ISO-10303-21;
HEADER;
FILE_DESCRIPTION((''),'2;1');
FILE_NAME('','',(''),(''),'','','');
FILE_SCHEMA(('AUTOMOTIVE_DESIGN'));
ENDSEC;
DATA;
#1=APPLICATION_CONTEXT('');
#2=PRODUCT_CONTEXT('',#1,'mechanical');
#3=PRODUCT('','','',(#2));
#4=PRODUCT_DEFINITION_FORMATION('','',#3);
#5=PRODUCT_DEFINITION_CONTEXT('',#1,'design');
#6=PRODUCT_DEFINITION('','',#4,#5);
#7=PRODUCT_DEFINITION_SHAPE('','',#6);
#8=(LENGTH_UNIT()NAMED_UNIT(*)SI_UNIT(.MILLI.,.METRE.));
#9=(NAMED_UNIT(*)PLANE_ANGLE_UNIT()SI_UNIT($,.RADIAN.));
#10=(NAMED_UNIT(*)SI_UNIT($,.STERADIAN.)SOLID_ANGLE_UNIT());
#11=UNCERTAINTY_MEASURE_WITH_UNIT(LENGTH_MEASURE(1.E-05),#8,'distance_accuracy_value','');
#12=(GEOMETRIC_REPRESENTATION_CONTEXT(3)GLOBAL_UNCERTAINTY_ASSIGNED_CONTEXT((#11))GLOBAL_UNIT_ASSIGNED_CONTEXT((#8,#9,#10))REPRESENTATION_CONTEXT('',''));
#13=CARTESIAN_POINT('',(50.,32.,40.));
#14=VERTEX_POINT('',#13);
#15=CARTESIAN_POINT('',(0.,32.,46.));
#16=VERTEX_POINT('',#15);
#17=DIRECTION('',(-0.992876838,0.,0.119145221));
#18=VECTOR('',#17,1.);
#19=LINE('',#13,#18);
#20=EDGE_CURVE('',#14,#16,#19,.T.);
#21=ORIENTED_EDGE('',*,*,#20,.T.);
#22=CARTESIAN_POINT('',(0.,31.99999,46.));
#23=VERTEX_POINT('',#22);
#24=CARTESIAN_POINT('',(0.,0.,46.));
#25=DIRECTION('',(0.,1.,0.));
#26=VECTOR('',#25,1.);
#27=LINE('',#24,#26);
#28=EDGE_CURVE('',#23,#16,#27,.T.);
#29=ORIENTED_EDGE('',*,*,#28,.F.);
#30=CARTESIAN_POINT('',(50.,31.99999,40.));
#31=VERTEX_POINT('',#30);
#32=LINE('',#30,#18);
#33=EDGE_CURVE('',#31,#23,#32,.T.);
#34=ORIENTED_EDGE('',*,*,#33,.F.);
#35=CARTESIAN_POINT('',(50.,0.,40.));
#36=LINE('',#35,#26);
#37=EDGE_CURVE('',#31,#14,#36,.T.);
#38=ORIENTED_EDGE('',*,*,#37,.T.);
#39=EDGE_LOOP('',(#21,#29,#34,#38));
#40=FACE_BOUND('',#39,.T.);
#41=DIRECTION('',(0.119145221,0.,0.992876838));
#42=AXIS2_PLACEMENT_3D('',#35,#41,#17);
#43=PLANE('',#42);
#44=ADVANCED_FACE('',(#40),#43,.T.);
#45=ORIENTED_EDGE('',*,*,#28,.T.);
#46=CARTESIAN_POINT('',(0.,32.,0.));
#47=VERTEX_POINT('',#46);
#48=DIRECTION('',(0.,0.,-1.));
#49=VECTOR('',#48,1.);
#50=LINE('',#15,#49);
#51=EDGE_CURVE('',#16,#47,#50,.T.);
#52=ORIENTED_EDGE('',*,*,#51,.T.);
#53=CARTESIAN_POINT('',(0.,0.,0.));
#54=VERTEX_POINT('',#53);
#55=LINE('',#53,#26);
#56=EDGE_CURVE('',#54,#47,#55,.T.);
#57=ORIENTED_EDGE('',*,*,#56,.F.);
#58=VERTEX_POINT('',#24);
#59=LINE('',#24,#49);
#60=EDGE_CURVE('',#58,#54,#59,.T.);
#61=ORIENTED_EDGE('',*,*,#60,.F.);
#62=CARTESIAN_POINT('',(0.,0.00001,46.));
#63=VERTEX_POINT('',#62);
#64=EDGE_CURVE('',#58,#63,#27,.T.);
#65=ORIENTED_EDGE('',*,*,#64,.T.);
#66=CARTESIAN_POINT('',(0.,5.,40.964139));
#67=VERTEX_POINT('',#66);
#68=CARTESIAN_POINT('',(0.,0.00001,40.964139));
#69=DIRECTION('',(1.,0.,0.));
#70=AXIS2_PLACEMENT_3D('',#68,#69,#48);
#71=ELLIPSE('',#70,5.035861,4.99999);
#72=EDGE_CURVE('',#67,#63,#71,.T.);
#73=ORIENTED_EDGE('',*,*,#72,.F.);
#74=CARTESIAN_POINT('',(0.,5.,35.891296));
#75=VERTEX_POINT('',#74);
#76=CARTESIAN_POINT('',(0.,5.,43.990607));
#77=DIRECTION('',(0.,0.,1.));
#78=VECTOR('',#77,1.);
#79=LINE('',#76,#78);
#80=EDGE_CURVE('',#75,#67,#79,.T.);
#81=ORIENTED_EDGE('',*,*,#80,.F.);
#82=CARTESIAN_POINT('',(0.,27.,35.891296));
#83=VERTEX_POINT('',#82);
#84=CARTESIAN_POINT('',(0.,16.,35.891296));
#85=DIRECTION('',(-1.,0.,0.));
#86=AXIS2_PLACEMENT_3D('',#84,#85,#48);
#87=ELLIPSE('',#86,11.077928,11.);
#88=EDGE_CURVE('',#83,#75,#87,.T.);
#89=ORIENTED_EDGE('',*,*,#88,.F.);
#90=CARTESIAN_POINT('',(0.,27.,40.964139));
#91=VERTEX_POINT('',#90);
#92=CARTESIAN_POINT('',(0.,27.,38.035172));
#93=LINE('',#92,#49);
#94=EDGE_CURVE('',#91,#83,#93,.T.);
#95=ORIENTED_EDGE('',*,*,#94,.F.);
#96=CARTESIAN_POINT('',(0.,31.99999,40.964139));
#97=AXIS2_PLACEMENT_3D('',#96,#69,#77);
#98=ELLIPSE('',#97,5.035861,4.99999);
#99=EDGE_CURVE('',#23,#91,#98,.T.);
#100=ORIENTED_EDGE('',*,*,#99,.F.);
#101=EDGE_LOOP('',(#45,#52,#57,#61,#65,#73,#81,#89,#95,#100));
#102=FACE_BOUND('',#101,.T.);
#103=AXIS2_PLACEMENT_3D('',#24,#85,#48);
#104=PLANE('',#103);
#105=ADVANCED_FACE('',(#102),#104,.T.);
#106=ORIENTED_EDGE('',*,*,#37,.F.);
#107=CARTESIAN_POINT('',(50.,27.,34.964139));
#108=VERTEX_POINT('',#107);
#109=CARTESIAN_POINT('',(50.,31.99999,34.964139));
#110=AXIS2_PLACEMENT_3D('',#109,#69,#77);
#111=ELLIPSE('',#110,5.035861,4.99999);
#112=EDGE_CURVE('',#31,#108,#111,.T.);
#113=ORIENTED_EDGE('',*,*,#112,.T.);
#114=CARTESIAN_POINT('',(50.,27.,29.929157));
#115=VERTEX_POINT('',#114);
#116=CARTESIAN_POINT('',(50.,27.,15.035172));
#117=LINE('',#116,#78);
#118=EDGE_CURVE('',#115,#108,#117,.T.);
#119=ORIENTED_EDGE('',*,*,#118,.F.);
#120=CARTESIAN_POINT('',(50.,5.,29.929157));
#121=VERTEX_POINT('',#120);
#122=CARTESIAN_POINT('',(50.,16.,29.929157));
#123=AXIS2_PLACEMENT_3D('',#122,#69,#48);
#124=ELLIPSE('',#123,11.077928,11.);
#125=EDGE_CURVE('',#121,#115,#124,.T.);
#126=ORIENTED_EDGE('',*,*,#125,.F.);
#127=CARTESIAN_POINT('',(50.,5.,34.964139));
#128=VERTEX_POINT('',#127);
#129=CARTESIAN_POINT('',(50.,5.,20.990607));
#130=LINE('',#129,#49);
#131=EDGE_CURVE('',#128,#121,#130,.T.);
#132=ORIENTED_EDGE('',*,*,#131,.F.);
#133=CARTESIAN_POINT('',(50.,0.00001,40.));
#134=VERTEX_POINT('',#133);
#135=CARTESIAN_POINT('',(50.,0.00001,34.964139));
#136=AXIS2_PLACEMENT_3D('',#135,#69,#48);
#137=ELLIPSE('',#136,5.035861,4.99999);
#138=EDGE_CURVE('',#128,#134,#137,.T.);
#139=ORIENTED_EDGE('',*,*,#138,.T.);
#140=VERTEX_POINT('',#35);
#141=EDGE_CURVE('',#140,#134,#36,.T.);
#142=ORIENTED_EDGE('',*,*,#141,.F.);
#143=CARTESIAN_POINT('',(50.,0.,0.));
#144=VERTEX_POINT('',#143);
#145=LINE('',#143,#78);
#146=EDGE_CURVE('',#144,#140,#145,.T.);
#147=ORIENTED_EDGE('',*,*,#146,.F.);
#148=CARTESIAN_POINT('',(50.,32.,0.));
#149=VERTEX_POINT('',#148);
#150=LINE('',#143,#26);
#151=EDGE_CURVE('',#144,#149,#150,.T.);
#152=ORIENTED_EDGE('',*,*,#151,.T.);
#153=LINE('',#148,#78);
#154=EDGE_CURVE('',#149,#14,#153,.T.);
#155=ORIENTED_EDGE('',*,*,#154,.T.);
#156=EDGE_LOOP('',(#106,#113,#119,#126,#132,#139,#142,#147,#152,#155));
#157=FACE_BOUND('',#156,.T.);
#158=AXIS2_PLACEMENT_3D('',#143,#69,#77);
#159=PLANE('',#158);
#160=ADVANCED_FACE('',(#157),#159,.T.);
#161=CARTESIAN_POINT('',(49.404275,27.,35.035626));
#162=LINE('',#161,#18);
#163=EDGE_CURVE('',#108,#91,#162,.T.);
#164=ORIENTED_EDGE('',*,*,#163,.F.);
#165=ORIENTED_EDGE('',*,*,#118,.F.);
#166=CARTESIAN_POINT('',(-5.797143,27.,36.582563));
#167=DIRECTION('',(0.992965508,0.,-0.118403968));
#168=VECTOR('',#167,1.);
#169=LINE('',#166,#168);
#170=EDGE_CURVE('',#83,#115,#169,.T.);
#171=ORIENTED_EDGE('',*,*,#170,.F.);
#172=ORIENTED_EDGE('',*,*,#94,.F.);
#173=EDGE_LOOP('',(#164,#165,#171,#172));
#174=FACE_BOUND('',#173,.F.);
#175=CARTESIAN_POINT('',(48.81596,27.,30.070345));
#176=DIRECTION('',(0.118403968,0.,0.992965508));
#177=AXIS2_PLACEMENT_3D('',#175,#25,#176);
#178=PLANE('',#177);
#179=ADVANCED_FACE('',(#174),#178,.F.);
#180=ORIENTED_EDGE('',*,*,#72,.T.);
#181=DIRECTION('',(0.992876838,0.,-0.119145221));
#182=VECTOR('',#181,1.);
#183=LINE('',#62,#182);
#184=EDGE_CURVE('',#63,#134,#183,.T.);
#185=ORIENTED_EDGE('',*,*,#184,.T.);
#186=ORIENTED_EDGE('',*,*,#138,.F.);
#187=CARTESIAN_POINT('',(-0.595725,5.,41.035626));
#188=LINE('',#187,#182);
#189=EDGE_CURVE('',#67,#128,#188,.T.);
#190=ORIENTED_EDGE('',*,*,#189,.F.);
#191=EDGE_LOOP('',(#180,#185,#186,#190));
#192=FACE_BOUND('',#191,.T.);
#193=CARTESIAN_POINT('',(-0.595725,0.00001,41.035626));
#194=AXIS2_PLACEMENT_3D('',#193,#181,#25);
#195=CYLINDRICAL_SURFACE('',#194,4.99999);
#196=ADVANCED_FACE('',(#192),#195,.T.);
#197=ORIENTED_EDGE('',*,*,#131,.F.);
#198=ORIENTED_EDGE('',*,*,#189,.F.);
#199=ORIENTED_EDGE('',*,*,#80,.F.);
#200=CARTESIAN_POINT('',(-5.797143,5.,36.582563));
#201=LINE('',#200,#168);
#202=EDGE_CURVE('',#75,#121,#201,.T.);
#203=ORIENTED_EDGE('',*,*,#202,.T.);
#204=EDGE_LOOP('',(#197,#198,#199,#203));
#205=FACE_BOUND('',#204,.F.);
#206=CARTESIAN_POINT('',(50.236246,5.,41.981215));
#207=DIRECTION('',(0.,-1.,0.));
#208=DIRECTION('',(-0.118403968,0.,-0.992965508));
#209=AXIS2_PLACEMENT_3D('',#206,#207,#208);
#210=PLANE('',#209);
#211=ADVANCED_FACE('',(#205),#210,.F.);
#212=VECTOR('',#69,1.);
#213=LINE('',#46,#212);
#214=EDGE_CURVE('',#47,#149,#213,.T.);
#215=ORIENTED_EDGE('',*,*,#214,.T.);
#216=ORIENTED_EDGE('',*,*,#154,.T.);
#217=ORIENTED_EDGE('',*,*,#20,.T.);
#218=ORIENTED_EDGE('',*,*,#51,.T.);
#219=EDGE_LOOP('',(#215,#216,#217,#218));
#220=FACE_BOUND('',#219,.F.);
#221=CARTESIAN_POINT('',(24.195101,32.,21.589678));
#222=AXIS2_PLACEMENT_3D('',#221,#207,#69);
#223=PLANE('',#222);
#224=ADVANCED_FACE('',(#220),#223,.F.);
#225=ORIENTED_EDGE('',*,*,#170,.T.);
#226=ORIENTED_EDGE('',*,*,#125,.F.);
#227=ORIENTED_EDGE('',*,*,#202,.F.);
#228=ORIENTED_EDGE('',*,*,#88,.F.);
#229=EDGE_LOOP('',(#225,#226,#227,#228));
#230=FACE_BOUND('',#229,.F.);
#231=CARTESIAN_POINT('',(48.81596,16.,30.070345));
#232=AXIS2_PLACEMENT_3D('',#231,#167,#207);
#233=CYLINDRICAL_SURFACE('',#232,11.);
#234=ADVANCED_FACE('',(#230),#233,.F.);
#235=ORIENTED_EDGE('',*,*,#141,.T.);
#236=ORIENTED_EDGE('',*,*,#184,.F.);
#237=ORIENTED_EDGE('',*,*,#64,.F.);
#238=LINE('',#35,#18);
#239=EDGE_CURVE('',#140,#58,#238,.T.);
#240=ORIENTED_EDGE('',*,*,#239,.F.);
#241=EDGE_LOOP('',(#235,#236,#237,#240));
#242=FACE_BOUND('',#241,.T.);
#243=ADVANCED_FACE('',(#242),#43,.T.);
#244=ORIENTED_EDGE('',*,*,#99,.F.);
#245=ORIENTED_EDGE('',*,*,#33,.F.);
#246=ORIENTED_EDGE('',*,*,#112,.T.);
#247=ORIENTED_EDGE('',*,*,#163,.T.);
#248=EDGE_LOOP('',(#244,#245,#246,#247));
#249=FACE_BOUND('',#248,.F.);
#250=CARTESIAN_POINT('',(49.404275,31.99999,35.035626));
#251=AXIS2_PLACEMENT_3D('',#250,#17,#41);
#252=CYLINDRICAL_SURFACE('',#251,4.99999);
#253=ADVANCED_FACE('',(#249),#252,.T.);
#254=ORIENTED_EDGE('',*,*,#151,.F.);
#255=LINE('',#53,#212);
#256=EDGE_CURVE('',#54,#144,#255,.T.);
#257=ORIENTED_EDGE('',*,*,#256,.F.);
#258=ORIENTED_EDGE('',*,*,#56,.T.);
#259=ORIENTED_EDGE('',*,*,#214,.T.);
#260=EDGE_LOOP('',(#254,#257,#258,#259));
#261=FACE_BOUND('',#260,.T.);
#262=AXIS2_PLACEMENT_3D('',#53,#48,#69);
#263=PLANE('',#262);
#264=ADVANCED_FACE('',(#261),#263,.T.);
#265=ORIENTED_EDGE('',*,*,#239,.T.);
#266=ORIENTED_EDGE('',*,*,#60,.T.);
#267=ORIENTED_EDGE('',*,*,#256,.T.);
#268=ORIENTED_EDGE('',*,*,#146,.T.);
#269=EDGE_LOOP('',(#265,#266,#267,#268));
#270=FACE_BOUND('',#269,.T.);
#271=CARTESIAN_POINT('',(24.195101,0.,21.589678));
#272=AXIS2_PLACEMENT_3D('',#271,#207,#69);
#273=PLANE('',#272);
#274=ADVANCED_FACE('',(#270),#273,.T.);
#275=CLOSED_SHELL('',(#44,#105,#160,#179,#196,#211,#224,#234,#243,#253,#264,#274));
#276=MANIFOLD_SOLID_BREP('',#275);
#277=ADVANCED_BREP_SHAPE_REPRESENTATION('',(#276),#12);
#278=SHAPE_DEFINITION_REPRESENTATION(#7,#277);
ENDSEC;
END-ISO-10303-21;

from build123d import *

# Parameters (mm, degrees)
F1_DEPTH = 32
F4_DEPTH = 55
F5_R     = 4.99999


# Not quite as in the source:
# - a fillet or chamfer is up to 0.001 mm smaller than in the source, because OpenCascade refuses the exact size


with BuildPart() as f1:
    # F0 (on Front) → F1 (new body)
    with BuildSketch(Plane.XZ):
        Polygon((0, 46), (0, 0), (50, 0), (50, 40), align=None)
    extrude(amount=-F1_DEPTH)

    # F3 (on face) → F4 (cut, symmetric)
    with BuildSketch(Plane(origin=(44.5961827524, 0, -5.3177728391), x_dir=(0, 1, 0), z_dir=(0.9929655081, 0, -0.1184039683))):
        with BuildLine():
            Line((5, 47.6340688765), (5, 35.6388187396))
            ThreePointArc((5, 35.6388187396), (16, 24.6388187396), (27, 35.6388187396))
            Line((27, 35.6388187396), (27, 47.6340688765))
            Line((27, 47.6340688765), (5, 47.6340688765))
        make_face()
    extrude(amount=F4_DEPTH, both=True, mode=Mode.SUBTRACT)

    # F5 (radius 5 in the source; OpenCascade refuses exactly that, so slightly less here)
    f5_edges = [f1.edges().sort_by_distance(p)[0] for p in [
        (25, 27, 43),
        (25, 5, 43),
    ]]
    fillet(f5_edges, radius=F5_R)


solid = f1.part
